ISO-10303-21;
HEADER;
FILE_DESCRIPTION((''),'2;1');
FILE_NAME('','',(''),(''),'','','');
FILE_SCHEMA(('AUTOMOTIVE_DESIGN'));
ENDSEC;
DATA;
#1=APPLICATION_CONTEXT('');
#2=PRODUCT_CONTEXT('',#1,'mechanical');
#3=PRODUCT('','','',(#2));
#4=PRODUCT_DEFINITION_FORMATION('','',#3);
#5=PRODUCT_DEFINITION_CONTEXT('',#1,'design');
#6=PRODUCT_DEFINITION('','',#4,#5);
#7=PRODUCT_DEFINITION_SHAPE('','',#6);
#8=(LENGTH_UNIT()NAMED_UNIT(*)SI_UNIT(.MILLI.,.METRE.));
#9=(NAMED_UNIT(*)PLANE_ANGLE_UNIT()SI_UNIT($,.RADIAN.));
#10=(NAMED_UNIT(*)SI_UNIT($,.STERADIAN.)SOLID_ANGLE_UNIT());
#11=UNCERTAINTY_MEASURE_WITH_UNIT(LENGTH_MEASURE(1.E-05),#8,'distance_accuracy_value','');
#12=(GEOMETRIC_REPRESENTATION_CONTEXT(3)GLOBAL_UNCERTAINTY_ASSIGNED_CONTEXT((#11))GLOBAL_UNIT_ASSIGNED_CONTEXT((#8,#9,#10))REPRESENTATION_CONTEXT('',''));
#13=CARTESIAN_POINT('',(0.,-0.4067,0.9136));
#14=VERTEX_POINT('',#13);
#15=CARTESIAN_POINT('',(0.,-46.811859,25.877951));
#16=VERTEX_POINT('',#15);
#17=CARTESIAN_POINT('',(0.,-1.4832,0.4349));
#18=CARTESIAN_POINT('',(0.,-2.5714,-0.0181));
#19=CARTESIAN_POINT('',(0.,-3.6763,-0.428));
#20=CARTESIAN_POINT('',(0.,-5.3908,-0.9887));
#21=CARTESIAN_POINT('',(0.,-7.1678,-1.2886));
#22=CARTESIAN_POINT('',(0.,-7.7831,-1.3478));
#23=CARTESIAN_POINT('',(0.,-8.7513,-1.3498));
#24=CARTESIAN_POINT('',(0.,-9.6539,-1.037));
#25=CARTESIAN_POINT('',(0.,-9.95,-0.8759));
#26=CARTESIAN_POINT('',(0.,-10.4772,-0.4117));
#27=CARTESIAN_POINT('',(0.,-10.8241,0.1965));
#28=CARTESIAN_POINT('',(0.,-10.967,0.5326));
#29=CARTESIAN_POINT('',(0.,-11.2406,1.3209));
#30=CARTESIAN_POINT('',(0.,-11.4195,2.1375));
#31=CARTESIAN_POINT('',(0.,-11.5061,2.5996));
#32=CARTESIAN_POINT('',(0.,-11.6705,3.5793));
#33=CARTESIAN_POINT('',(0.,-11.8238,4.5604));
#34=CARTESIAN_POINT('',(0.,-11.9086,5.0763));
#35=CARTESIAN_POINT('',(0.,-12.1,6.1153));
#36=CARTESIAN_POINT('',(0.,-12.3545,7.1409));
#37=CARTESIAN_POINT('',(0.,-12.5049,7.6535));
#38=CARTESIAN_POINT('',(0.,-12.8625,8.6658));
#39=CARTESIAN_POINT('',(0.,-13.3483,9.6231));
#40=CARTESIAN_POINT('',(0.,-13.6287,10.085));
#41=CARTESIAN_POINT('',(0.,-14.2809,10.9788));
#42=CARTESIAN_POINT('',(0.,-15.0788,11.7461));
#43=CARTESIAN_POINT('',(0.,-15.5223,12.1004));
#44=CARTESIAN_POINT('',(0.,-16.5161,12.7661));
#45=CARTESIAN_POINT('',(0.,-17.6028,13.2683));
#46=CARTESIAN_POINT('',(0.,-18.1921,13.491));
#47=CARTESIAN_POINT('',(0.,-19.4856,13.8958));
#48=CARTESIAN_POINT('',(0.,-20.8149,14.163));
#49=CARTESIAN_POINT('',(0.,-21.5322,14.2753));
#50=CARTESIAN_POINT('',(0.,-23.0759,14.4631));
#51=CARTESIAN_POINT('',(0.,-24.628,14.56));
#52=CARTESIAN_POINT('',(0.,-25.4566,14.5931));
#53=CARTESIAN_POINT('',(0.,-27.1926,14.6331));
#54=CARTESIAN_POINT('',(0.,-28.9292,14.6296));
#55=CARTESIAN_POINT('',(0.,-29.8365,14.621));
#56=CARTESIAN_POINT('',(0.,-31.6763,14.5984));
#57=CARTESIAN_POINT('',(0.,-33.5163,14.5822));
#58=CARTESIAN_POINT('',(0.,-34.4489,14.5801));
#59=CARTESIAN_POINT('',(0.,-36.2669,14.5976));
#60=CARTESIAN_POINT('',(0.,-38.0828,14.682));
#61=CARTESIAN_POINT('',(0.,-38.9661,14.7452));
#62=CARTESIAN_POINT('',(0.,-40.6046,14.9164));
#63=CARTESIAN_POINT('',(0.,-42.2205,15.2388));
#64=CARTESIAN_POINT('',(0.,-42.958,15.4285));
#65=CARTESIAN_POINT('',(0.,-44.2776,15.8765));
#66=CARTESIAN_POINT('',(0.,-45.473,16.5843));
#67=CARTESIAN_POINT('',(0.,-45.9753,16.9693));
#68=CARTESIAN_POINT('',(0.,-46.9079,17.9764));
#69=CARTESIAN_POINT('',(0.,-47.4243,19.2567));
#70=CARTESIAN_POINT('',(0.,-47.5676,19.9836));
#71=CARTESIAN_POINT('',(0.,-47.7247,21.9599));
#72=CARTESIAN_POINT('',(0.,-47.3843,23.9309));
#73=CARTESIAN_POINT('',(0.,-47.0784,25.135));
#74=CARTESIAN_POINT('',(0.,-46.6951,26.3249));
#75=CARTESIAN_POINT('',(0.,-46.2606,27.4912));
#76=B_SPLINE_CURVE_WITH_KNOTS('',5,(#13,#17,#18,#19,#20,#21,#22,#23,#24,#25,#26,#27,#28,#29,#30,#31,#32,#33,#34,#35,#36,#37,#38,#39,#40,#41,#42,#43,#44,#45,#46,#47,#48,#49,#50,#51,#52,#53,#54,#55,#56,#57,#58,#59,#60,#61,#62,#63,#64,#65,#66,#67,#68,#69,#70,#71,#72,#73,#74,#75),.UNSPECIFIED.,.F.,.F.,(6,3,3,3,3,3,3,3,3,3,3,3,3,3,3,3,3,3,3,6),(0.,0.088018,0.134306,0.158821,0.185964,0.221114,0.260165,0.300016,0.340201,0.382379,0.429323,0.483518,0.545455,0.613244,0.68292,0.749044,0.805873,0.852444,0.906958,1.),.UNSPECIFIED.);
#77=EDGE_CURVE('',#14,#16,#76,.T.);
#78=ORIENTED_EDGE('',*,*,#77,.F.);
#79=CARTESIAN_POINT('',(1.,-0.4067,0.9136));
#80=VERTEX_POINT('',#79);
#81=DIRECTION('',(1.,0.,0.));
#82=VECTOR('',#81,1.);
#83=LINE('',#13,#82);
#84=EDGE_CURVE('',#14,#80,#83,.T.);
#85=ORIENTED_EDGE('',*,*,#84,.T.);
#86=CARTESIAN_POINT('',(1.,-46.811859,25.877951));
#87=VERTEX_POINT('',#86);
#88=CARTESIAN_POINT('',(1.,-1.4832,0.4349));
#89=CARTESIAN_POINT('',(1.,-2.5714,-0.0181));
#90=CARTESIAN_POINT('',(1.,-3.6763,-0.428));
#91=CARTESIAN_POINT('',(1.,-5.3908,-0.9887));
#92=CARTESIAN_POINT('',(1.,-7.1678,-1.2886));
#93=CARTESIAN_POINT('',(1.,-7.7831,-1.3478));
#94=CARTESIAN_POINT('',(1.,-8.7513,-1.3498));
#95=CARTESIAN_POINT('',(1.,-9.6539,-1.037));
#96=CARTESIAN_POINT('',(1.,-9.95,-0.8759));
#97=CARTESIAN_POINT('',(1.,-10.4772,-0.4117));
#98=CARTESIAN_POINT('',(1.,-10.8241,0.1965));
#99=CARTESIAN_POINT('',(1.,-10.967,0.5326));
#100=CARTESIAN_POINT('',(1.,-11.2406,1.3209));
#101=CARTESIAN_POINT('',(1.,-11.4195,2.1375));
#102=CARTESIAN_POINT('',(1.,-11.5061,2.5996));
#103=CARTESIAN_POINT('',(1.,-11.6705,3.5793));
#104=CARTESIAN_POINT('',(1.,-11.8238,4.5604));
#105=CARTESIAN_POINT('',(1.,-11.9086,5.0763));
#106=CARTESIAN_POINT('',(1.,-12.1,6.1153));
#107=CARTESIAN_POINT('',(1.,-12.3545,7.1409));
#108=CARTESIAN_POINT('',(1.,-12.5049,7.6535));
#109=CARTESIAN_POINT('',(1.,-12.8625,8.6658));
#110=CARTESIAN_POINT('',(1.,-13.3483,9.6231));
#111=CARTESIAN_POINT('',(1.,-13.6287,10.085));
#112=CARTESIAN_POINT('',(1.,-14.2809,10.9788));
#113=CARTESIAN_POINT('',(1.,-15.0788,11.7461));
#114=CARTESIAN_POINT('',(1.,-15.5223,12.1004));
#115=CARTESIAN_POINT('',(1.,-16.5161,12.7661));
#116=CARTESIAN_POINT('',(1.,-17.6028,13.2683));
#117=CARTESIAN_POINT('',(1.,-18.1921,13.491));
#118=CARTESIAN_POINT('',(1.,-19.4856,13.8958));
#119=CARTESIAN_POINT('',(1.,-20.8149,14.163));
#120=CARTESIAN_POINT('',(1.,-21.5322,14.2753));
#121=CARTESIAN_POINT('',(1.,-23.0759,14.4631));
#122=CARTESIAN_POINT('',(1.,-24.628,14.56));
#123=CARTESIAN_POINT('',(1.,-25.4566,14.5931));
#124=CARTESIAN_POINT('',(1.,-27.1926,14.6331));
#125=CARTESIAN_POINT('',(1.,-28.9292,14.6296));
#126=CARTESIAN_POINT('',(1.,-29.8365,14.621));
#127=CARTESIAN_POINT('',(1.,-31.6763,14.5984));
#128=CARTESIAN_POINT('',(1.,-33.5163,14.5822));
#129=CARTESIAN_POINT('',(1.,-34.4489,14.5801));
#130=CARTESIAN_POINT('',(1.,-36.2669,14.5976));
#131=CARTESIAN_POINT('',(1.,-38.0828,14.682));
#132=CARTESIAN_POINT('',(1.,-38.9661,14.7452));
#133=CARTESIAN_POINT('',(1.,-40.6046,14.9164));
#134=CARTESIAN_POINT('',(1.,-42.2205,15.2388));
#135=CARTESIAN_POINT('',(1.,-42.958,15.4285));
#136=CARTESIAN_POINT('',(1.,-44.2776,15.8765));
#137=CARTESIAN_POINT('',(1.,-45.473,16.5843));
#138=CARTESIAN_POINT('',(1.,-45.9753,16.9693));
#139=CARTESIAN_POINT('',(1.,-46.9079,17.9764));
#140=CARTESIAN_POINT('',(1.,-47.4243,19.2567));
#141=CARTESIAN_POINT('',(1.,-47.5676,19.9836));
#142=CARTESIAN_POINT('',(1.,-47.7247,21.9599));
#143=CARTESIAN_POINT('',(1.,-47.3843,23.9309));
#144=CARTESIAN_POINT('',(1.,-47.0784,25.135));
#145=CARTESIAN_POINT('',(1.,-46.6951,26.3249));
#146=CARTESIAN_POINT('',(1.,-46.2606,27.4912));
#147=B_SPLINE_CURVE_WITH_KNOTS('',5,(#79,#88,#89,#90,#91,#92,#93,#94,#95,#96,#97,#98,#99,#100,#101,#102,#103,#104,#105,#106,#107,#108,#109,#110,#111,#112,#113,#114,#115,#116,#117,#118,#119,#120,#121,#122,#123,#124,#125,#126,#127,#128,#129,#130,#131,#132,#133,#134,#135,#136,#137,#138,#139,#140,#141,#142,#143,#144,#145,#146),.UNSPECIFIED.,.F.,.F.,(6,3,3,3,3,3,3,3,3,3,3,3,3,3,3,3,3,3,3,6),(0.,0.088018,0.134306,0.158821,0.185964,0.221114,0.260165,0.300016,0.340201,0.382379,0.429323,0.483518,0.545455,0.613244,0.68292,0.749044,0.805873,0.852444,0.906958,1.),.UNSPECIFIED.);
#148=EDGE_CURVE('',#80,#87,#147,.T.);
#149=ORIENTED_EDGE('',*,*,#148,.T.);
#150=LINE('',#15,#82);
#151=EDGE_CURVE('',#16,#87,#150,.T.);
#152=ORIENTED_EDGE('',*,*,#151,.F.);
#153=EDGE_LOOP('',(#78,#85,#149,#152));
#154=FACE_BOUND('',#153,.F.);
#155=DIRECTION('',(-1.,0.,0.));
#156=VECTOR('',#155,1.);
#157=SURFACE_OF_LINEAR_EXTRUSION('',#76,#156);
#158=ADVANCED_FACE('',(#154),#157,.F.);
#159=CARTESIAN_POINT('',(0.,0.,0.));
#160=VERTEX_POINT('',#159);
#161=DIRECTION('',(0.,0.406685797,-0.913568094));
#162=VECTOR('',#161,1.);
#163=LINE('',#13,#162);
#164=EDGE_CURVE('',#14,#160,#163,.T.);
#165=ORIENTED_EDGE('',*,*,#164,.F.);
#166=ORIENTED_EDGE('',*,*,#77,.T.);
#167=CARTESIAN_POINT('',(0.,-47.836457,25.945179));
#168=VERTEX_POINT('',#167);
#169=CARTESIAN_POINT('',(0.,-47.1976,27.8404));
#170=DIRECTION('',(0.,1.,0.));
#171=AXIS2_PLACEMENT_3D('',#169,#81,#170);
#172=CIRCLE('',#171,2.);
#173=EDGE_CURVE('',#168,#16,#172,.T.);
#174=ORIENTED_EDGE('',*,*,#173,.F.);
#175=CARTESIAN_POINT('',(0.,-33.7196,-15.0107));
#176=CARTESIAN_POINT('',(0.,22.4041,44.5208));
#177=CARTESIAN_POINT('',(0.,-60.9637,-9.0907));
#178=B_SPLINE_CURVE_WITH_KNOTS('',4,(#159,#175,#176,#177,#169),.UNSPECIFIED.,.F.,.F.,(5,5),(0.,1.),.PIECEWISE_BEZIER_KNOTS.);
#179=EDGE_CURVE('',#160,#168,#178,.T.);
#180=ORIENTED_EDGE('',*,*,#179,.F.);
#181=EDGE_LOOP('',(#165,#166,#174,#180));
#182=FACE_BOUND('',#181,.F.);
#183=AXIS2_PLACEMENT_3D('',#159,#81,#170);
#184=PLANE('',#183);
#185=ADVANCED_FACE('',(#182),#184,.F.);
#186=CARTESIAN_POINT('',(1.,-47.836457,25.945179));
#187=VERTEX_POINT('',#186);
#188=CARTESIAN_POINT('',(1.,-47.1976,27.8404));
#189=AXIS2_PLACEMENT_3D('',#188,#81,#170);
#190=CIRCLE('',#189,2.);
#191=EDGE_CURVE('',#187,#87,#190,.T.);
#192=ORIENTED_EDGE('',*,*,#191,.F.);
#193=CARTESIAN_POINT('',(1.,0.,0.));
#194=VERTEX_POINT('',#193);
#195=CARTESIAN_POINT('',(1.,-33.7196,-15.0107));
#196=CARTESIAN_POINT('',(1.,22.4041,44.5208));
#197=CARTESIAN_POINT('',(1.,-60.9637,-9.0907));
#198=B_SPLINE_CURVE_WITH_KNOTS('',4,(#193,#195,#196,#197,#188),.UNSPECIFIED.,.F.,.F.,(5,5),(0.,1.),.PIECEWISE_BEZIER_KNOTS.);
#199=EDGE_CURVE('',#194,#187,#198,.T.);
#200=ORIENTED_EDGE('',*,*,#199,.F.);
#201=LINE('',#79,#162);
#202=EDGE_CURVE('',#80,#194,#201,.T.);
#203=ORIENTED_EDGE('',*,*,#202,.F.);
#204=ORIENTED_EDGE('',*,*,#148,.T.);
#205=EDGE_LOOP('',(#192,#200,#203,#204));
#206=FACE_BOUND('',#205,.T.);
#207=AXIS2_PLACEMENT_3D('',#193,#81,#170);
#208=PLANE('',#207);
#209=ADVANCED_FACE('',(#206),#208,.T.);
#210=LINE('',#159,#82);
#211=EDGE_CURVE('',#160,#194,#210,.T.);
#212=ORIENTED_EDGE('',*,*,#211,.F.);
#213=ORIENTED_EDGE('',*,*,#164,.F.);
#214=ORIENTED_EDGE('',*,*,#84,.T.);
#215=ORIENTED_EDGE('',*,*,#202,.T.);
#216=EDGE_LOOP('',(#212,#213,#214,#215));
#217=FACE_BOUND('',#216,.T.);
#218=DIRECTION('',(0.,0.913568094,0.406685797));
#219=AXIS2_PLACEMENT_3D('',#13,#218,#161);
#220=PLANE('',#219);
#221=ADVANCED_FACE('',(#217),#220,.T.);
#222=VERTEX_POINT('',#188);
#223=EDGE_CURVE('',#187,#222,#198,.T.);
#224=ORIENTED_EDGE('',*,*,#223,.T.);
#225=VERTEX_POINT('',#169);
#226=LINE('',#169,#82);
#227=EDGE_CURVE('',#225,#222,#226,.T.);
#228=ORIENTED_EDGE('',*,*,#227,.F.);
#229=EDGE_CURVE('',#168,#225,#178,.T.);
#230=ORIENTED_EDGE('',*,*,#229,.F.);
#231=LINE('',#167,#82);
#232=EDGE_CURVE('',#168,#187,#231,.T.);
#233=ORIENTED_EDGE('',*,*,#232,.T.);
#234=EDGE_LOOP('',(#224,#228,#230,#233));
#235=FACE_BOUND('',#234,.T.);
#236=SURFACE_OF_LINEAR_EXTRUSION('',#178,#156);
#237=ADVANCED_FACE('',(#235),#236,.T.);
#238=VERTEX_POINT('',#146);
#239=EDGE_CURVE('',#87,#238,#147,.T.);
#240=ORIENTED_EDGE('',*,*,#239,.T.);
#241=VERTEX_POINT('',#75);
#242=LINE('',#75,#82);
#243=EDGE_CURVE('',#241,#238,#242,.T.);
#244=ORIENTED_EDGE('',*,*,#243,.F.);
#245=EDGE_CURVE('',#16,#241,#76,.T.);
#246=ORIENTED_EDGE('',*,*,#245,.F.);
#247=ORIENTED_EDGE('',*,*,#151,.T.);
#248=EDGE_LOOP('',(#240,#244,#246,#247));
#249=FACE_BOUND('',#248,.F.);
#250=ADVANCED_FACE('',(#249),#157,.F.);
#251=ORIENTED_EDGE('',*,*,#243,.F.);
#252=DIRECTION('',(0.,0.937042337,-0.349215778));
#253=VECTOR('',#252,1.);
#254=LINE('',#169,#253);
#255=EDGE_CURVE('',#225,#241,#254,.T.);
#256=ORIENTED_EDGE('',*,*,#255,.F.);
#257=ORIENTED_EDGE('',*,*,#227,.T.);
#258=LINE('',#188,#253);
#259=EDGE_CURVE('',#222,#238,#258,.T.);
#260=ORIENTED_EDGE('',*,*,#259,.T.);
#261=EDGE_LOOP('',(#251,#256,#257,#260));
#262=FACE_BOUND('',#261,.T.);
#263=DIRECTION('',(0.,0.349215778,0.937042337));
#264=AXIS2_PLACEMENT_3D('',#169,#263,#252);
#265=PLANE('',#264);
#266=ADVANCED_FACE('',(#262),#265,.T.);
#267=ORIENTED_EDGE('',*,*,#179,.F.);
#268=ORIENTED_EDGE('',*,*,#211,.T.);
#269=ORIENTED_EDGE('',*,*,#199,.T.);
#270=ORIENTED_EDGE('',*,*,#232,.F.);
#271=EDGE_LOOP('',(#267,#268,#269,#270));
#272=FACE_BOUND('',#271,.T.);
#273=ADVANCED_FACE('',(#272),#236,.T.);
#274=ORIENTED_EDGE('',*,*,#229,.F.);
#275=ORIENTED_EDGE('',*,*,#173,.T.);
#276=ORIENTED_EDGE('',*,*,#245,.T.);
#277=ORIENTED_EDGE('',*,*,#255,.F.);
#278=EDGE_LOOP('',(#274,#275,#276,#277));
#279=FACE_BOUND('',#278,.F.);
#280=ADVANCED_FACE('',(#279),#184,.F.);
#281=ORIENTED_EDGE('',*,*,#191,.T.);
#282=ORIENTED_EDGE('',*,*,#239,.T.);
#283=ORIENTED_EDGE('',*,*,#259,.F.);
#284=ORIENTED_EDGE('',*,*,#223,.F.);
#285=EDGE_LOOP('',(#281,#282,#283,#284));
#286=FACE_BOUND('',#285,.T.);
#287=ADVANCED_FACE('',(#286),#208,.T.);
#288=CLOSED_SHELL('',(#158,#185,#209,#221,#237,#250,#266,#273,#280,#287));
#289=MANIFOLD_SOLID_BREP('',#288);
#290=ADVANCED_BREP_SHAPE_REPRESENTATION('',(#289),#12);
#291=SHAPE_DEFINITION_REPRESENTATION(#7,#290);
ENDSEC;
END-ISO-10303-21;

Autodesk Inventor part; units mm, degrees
ref_plane "YZ Plane" through (0, 0, 0) normal (1, 0, 0) x (0, 1, 0)
ref_plane "XZ Plane" through (0, 0, 0) normal (0, 1, 0) x (-1, 0, 0)
ref_plane "XY Plane" through (0, 0, 0) normal (0, 0, 1) x (1, 0, 0)
sketch "Sketch1" plane through (0, 0, 0) normal (1, 0, 0) x (0, 1, 0)
  circle A0 centre (-47.1976, 27.8404) radius 2 projected
  spline S0 degree 4 poles (0, 0) (-33.7196, -15.0107) (22.4041, 44.5208) (-60.9637, -9.0907) (-47.1976, 27.8404) knots 0 0 0 0 0 1 1 1 1 1
  line L0 (-47.1976, 27.8404) -> (-46.2606, 27.4912)
  line L1 (-0.4067, 0.9136) -> (0, 0)
  spline S1 degree 5 poles (-0.4067, 0.9136) (-1.4832, 0.4349) (-2.5714, -0.0181) (-3.6763, -0.428) (-5.3908, -0.9887) (-7.1678, -1.2886) (-7.7831, -1.3478) (-8.7513, -1.3498) (-9.6539, -1.037) (-9.95, -0.8759) (-10.4772, -0.4117) (-10.8241, 0.1965) (-10.967, 0.5326) (-11.2406, 1.3209) (-11.4195, 2.1375) (-11.5061, 2.5996) (-11.6705, 3.5793) (-11.8238, 4.5604) (-11.9086, 5.0763) (-12.1, 6.1153) (-12.3545, 7.1409) (-12.5049, 7.6535) (-12.8625, 8.6658) (-13.3483, 9.6231) (-13.6287, 10.085) (-14.2809, 10.9788) (-15.0788, 11.7461) (-15.5223, 12.1004) (-16.5161, 12.7661) (-17.6028, 13.2683) (-18.1921, 13.491) (-19.4856, 13.8958) (-20.8149, 14.163) (-21.5322, 14.2753) (-23.0759, 14.4631) (-24.628, 14.56) (-25.4566, 14.5931) (-27.1926, 14.6331) (-28.9292, 14.6296) (-29.8365, 14.621) (-31.6763, 14.5984) (-33.5163, 14.5822) (-34.4489, 14.5801) (-36.2669, 14.5976) (-38.0828, 14.682) (-38.9661, 14.7452) (-40.6046, 14.9164) (-42.2205, 15.2388) (-42.958, 15.4285) (-44.2776, 15.8765) (-45.473, 16.5843) (-45.9753, 16.9693) (-46.9079, 17.9764) (-47.4243, 19.2567) (-47.5676, 19.9836) (-47.7247, 21.9599) (-47.3843, 23.9309) (-47.0784, 25.135) (-46.6951, 26.3249) (-46.2606, 27.4912) knots 0 0 0 0 0 0 0.088018 0.088018 0.088018 0.134306 0.134306 0.134306 0.158821 0.158821 0.158821 0.185964 0.185964 0.185964 0.221114 0.221114 0.221114 0.260165 0.260165 0.260165 0.300016 0.300016 0.300016 0.340201 0.340201 0.340201 0.382379 0.382379 0.382379 0.429323 0.429323 0.429323 0.483518 0.483518 0.483518 0.545455 0.545455 0.545455 0.613244 0.613244 0.613244 0.68292 0.68292 0.68292 0.749044 0.749044 0.749044 0.805873 0.805873 0.805873 0.852444 0.852444 0.852444 0.906958 0.906958 0.906958 1 1 1 1 1 1
  point P0 (-12.3692, 1.8393)
  point P1 (-15.2528, 10.4894)
  point P2 (-34.3094, 13.5861)
  dimension "d1" = 1
sketch "Sketch2" plane through (0, 0, 0) normal (0, 1, 0) x (-1, 0, 0)
  circle A0 centre (0, 0) radius 0.5
  dimension "d0" = 1
extrude "Extrusion1" add sketch "Sketch1" along normal blind 1 contours S0 L0 S1 A0 | A0 S1 L1 S0 picked at (-46.7567, 27.0699)
properties part number "Fiber_test"
